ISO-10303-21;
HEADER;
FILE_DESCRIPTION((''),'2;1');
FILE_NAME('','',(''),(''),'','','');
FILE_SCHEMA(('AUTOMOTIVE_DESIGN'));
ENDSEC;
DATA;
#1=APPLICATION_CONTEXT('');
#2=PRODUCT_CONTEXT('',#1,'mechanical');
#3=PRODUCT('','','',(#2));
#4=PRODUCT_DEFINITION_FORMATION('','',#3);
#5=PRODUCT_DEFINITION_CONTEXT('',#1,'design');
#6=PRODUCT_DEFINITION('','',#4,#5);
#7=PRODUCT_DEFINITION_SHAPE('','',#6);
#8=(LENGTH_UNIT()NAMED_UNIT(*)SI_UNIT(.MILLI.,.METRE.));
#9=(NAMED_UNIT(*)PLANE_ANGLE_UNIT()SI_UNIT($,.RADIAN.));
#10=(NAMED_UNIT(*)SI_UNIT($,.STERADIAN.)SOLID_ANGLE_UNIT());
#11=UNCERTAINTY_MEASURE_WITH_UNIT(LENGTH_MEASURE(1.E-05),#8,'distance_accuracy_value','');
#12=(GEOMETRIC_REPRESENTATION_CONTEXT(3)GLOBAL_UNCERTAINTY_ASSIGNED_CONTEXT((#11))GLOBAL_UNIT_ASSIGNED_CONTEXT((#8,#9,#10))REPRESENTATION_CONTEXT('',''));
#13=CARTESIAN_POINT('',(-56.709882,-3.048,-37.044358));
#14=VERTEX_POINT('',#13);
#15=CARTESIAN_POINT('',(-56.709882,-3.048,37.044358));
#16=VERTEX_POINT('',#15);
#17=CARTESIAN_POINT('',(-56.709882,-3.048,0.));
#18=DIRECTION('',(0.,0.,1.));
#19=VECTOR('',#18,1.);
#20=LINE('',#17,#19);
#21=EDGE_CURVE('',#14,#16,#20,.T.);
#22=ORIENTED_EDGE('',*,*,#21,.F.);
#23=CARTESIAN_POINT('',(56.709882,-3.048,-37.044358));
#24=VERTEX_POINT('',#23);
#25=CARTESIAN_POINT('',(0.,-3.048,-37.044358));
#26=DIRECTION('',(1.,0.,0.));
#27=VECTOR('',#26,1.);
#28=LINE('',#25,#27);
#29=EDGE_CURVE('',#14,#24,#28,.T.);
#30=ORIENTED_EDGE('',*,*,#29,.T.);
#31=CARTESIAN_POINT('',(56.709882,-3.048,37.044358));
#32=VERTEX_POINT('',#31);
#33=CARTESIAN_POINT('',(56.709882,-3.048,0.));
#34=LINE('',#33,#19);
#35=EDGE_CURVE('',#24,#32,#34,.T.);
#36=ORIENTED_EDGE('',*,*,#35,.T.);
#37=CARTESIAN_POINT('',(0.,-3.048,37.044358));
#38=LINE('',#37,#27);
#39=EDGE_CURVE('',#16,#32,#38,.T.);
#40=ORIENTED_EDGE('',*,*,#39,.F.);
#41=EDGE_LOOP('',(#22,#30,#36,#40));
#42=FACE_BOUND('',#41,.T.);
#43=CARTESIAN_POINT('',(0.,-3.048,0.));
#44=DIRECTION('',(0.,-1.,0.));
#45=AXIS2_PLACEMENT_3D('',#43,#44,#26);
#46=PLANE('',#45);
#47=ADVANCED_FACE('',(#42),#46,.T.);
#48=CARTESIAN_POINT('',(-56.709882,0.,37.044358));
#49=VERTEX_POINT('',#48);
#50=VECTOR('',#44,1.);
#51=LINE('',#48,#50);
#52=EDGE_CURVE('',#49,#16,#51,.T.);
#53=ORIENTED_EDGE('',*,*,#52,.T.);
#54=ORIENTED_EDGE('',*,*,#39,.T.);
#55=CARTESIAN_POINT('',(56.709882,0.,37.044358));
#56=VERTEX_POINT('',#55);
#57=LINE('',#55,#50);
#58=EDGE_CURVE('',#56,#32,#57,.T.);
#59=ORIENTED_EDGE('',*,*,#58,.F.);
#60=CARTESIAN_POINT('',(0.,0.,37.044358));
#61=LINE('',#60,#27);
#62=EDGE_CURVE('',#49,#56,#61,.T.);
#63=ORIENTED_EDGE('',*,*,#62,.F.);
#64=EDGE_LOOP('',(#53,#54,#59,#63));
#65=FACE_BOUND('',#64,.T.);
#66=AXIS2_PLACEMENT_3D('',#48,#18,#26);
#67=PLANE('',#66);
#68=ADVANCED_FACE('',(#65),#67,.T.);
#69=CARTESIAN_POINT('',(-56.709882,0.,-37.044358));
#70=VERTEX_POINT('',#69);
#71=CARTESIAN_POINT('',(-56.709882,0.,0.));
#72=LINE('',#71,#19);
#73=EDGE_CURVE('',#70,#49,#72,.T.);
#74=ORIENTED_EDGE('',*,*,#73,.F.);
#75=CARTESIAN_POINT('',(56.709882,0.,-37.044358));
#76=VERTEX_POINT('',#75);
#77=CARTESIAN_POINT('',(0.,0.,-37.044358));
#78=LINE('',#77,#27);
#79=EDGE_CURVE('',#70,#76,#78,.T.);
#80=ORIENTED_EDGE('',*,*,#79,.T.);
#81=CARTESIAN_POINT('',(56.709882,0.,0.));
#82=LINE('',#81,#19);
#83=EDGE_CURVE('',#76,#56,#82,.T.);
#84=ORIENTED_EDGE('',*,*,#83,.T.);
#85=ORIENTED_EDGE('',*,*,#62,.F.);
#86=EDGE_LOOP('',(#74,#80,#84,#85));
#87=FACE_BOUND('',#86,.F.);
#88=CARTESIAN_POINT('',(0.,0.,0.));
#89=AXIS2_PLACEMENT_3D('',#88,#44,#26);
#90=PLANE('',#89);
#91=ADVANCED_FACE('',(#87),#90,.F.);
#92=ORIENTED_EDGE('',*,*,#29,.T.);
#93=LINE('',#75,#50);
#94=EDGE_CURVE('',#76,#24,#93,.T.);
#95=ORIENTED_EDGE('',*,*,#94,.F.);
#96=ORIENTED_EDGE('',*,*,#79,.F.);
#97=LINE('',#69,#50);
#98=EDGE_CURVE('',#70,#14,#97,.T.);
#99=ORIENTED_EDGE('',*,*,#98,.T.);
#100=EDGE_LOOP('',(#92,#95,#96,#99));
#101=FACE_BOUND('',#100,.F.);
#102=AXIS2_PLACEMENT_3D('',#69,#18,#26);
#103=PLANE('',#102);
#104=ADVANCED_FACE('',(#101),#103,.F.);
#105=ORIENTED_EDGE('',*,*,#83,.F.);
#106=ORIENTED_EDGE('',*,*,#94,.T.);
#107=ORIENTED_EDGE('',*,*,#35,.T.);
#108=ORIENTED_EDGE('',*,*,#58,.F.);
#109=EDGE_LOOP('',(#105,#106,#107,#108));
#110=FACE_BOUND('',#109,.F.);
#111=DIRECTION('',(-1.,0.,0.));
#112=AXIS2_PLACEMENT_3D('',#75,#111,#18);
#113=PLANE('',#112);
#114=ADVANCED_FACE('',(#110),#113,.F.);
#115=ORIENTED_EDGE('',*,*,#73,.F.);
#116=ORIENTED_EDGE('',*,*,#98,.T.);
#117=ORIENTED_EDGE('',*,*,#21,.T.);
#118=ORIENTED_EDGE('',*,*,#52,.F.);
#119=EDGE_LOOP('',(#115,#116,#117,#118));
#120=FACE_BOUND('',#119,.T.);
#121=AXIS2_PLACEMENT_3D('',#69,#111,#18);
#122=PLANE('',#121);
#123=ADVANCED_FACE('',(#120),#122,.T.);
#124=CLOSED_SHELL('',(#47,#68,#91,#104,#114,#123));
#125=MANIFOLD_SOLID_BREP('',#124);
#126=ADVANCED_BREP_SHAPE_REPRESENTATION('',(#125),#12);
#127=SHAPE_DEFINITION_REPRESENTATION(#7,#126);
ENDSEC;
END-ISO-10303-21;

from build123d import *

# Parameters (mm, degrees)
F0_W     = 113.4197637439
F0_H     = 74.0887150168
F1_DEPTH = 3.048


# Not quite as in the source:
# - the program builds the solid bodies; features that only make, move or delete a surface that nothing else refers to are left out


with BuildPart() as f1:
    # F0 (on Front) → F1 (new body)
    with BuildSketch(Plane.XZ):
        Rectangle(F0_W, F0_H)
    extrude(amount=F1_DEPTH)


solid = f1.part
